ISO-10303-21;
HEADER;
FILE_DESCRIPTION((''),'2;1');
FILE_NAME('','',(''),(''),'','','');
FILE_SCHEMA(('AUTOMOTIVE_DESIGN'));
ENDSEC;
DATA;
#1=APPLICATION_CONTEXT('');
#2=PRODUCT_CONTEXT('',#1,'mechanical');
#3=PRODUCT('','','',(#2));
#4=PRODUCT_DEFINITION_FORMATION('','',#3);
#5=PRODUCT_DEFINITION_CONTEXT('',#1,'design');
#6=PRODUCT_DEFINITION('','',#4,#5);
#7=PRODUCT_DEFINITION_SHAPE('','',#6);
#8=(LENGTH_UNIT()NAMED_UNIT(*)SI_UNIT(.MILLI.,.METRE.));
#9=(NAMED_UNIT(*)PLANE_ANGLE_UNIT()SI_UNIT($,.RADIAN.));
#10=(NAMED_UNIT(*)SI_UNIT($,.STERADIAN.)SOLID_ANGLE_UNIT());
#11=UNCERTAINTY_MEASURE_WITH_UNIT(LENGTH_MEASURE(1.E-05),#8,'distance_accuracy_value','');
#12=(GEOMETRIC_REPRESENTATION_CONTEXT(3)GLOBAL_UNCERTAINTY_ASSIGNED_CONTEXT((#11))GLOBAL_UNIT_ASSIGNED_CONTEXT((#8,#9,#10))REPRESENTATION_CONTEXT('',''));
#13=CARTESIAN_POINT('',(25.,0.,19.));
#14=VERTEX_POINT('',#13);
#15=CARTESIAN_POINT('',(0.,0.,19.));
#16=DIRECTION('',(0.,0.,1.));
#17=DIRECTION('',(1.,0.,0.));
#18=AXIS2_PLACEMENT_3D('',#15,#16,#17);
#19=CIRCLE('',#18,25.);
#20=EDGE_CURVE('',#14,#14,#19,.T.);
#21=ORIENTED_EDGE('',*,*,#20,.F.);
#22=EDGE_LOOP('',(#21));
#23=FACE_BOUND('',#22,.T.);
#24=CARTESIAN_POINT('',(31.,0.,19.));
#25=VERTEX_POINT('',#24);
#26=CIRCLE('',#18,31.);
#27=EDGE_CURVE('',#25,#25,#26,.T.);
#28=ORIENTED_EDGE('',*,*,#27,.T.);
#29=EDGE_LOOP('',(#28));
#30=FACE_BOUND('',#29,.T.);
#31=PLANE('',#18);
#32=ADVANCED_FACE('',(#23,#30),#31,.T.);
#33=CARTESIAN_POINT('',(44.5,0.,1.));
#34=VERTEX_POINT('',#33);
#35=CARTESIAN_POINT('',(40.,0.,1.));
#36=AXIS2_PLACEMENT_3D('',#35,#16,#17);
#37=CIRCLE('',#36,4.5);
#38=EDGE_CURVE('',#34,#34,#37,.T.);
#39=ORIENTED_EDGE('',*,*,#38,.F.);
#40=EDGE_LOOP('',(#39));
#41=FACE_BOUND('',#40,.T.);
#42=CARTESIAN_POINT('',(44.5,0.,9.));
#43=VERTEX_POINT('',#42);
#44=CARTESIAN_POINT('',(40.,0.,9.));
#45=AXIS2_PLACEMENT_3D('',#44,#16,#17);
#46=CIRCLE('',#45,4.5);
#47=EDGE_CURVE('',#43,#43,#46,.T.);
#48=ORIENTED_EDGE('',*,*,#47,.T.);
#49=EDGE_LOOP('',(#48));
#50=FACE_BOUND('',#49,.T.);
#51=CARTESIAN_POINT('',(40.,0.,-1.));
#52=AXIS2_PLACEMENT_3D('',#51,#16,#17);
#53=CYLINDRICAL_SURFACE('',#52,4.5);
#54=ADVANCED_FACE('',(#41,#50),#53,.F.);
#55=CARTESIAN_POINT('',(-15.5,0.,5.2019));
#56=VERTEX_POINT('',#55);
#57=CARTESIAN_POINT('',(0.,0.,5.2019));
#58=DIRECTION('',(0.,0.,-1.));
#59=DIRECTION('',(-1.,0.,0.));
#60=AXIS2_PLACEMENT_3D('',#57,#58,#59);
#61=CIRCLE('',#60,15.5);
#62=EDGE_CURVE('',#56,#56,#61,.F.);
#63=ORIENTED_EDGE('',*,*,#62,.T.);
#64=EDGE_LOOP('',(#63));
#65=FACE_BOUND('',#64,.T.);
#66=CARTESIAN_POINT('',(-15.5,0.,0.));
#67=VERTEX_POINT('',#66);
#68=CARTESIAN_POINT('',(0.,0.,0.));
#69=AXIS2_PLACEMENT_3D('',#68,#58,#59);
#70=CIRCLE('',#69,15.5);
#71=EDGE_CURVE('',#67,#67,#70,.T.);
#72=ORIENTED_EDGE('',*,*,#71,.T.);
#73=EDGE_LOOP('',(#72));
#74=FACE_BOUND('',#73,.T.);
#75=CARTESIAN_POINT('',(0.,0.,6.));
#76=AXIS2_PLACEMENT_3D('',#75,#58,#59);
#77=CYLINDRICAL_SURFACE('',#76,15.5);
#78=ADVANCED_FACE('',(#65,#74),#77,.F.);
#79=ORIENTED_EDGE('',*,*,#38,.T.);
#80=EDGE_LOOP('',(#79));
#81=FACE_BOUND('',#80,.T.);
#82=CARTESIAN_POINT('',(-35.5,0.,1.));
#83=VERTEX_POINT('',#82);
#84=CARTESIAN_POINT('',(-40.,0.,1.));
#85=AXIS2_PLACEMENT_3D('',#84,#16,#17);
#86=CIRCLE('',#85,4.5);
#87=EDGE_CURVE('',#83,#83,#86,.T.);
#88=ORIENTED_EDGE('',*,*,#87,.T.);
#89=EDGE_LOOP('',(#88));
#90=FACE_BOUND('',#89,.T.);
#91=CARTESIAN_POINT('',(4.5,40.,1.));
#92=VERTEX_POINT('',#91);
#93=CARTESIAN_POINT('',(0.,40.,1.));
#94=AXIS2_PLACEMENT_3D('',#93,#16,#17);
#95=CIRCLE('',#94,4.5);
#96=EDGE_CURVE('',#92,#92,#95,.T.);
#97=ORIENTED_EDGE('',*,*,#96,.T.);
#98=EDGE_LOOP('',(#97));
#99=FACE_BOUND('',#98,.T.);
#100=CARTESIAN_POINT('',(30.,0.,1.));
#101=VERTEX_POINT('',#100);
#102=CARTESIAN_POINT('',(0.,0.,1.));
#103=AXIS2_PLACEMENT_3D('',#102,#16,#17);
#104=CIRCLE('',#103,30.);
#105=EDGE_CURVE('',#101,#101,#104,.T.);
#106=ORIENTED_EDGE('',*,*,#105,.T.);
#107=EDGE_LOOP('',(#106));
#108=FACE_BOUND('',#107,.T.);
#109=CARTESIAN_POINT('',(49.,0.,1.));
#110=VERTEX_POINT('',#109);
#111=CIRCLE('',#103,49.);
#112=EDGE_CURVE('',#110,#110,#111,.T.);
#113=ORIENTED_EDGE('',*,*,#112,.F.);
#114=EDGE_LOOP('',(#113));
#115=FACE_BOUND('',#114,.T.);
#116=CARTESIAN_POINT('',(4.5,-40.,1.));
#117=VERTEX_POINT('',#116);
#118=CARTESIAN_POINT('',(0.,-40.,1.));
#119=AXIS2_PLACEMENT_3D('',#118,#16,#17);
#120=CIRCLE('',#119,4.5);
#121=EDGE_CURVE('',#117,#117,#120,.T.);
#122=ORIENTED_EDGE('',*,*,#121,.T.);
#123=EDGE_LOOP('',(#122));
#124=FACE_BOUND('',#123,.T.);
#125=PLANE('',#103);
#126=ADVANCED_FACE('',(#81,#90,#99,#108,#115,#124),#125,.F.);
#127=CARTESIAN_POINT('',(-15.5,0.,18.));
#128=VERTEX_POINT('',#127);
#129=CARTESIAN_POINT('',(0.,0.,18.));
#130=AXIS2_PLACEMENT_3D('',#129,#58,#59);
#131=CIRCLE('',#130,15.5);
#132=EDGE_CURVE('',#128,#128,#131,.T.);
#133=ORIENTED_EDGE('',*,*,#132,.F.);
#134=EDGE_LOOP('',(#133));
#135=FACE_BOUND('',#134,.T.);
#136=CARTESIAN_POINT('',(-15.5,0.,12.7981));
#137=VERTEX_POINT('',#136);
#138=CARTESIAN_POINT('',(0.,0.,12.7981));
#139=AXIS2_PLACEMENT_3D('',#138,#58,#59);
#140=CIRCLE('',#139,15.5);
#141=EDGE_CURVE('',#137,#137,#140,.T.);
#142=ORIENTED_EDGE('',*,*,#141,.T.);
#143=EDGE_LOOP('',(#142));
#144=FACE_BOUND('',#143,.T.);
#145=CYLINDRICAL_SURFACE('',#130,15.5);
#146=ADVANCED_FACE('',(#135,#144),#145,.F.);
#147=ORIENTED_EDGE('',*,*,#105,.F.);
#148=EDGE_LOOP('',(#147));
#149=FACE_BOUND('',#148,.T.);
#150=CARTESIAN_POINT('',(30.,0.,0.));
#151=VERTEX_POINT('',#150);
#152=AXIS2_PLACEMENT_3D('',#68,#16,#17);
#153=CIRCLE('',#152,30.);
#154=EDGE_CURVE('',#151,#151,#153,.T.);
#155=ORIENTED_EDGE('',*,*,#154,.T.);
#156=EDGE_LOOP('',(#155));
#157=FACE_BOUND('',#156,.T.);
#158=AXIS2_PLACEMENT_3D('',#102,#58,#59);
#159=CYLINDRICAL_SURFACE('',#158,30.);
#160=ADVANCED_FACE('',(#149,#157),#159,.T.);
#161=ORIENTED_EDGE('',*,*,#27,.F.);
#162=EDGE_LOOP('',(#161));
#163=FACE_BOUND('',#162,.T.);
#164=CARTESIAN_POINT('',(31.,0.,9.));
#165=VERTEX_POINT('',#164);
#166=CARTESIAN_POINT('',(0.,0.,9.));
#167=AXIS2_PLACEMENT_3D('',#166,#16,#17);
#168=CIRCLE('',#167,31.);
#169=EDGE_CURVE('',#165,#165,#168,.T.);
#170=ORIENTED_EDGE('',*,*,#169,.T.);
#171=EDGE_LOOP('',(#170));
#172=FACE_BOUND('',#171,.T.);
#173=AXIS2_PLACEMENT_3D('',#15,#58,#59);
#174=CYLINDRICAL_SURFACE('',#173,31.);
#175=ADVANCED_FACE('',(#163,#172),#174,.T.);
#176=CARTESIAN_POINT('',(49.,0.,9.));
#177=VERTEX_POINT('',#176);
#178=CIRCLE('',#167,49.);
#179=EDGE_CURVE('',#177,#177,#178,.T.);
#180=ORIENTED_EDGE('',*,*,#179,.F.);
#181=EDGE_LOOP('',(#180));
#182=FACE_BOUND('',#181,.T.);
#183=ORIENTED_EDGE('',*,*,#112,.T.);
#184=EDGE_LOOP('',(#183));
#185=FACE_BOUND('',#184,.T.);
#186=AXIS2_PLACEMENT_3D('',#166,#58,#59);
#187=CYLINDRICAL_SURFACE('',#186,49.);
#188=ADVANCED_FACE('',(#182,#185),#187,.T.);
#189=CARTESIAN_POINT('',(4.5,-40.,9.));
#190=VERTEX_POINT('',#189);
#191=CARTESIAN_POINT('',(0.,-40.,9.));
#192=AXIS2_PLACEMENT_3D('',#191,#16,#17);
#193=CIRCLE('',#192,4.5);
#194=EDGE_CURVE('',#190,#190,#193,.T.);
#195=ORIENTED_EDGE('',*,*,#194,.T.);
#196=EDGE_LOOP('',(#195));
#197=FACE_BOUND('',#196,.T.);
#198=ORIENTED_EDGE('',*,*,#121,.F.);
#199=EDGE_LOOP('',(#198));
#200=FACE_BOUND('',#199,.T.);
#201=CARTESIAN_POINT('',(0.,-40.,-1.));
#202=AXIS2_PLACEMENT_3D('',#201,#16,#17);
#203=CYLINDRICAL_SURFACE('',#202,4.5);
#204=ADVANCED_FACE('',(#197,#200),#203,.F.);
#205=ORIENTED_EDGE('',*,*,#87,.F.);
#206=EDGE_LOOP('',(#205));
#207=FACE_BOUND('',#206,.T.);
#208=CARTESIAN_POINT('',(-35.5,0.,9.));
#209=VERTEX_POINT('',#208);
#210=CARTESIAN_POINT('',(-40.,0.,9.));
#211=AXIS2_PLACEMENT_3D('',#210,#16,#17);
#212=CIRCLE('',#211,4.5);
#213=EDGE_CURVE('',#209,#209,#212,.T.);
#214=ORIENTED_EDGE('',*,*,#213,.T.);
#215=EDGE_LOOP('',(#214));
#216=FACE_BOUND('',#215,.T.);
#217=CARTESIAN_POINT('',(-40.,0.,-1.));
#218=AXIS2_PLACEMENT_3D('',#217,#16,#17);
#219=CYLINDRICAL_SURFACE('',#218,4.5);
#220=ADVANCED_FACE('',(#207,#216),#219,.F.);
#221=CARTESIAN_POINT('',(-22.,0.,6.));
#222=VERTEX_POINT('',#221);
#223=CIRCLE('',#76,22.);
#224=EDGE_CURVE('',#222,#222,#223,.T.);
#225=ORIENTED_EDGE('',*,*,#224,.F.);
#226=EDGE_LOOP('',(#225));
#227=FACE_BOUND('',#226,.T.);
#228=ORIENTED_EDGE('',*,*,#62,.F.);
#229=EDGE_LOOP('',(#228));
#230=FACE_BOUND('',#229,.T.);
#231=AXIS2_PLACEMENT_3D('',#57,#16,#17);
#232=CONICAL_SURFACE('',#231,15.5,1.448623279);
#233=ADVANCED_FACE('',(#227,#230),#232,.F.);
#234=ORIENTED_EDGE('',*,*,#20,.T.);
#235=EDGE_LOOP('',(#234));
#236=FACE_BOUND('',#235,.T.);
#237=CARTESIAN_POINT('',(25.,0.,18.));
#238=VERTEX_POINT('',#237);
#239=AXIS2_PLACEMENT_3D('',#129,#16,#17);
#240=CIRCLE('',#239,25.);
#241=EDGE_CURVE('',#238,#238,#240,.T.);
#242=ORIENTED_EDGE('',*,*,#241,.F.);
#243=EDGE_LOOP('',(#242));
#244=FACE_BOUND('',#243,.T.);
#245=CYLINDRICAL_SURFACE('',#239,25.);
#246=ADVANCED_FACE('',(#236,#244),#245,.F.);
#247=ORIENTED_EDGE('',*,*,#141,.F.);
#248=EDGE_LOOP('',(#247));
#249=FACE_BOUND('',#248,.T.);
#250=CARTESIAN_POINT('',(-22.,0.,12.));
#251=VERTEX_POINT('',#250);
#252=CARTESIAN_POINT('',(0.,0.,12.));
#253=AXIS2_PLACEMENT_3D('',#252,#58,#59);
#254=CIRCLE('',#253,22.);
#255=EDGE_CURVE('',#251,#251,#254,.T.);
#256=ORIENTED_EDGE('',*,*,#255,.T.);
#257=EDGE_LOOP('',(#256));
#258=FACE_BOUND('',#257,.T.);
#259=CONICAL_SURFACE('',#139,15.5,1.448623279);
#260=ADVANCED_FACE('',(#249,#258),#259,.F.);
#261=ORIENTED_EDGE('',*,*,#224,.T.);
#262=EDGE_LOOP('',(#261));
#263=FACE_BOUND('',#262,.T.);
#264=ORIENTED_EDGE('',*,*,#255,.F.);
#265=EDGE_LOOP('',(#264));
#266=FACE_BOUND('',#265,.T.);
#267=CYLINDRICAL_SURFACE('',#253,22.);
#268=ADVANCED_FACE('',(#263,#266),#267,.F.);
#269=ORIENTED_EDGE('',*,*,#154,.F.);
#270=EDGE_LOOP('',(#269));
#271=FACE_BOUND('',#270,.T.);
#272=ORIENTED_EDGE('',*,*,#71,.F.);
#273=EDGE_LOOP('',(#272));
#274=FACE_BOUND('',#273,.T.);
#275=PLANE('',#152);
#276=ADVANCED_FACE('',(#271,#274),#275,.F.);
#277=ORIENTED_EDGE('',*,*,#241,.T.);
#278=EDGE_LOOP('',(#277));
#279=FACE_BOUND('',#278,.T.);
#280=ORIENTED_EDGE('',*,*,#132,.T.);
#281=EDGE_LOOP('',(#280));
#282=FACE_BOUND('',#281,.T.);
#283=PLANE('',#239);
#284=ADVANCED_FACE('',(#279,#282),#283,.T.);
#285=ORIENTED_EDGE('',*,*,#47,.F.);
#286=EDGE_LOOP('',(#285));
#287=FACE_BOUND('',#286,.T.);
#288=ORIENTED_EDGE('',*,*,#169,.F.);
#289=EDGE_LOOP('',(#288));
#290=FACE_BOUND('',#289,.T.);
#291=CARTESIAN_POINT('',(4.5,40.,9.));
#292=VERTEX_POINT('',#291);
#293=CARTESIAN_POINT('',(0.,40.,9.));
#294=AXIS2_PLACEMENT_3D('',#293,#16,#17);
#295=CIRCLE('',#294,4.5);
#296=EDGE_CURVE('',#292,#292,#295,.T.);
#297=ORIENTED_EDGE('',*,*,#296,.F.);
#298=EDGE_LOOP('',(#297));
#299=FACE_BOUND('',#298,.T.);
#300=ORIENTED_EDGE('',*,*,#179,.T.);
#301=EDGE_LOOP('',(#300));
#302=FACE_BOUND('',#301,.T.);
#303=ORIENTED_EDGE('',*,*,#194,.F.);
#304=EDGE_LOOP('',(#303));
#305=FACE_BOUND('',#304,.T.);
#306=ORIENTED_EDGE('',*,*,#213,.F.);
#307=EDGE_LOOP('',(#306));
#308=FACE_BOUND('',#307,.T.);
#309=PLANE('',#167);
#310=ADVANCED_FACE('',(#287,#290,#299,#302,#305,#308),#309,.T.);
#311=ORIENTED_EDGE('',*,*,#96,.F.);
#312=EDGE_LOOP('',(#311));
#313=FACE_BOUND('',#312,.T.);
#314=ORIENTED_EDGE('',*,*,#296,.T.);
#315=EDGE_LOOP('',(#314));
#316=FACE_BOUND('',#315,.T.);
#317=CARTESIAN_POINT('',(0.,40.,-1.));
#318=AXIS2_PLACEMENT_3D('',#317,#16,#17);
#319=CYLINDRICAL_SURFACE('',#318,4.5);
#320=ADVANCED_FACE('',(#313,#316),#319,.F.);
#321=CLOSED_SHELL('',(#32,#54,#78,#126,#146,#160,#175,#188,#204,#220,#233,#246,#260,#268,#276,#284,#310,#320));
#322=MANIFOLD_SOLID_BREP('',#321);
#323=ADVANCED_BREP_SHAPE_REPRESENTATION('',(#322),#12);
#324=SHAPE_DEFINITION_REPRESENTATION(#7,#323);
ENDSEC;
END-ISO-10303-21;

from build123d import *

# Parameters (mm, degrees)
SKETCH_1_R          = 30
EXTRUDE_1_DEPTH     = 1
SKETCH_2_R          = 49
EXTRUDE_2_DEPTH     = 8
SKETCH_3_R          = 31
EXTRUDE_3_DEPTH     = 10
SKETCH_4_R          = 25
CUT_EXTRUDE_1_DEPTH = 1
SKETCH_5_R          = 15.5
CUT_EXTRUDE_2_DEPTH = 6
SKETCH_6_R          = 22
CUT_EXTRUDE_3_DEPTH = 6
SKETCH_7_R          = 15.5
CUT_EXTRUDE_4_DEPTH = 6
CHAMFER_1_SIZE2     = 6.5
CHAMFER_1_SIZE      = 0.798099646
CHAMFER_2_SIZE2     = 0.798099646
CHAMFER_2_SIZE      = 6.5
SKETCH_8_R          = 4.5
CUT_EXTRUDE_5_DEPTH = 10


with BuildPart() as part:
    # 草图1 → 凸台-拉伸1 (new body)
    with BuildSketch(Plane.XY):
        Circle(SKETCH_1_R)
    extrude(amount=EXTRUDE_1_DEPTH)

    # 草图2 → 凸台-拉伸2 (add)
    with BuildSketch(Plane.XY.offset(1)):
        Circle(SKETCH_2_R)
    extrude(amount=EXTRUDE_2_DEPTH)

    # 草图3 → 凸台-拉伸3 (add)
    with BuildSketch(Plane.XY.offset(9)):
        Circle(SKETCH_3_R)
    extrude(amount=EXTRUDE_3_DEPTH)

    # 草图4 → 切除-拉伸1 (cut)
    with BuildSketch(Plane.XY.offset(19)):
        Circle(SKETCH_4_R)
    extrude(amount=-CUT_EXTRUDE_1_DEPTH, mode=Mode.SUBTRACT)

    # 草图5 → 切除-拉伸2 (cut)
    with BuildSketch(Plane(origin=(0, 0, 0), x_dir=(-1, 0, 0), z_dir=(0, 0, -1))):
        Circle(SKETCH_5_R)
    extrude(amount=-CUT_EXTRUDE_2_DEPTH, mode=Mode.SUBTRACT)

    # 草图6 → 切除-拉伸3 (cut)
    with BuildSketch(Plane(origin=(0, 0, 6), x_dir=(-1, 0, 0), z_dir=(0, 0, -1))):
        Circle(SKETCH_6_R)
    extrude(amount=-CUT_EXTRUDE_3_DEPTH, mode=Mode.SUBTRACT)

    # 草图7 → 切除-拉伸4 (cut)
    with BuildSketch(Plane(origin=(0, 0, 12), x_dir=(-1, 0, 0), z_dir=(0, 0, -1))):
        Circle(SKETCH_7_R)
    extrude(amount=-CUT_EXTRUDE_4_DEPTH, mode=Mode.SUBTRACT)

    # 倒角1
    chamfer_1_edges = [part.edges().sort_by_distance(p)[0] for p in [
        (15.5, 0, 6),
    ]]
    chamfer_1_side = [part.faces().sort_by_distance(p)[0] for p in [
        (15.5, 0, 5.984038007),
    ]]
    chamfer(chamfer_1_edges, length=CHAMFER_1_SIZE - 0.0001, length2=CHAMFER_1_SIZE2 - 0.0001, reference=chamfer_1_side[0])  # a hair under: the kernel refuses the full size

    # 倒角2
    chamfer_2_edges = [part.edges().sort_by_distance(p)[0] for p in [
        (15.5, 0, 12),
    ]]
    chamfer_2_side = [part.faces().sort_by_distance(p)[0] for p in [
        (15.515961993, 0, 12),
    ]]
    chamfer(chamfer_2_edges, length=CHAMFER_2_SIZE - 0.0001, length2=CHAMFER_2_SIZE2 - 0.0001, reference=chamfer_2_side[0])  # a hair under: the kernel refuses the full size

    # 草图8 → 切除-拉伸5 (cut)
    with BuildSketch(Plane.XY.offset(9)):
        with Locations((0, 40)):
            Circle(SKETCH_8_R)
        with Locations((40, 0)):
            Circle(SKETCH_8_R)
        with Locations((0, -40)):
            Circle(SKETCH_8_R)
        with Locations((-40, 0)):
            Circle(SKETCH_8_R)
    extrude(amount=-CUT_EXTRUDE_5_DEPTH, mode=Mode.SUBTRACT)


solid = part.part
